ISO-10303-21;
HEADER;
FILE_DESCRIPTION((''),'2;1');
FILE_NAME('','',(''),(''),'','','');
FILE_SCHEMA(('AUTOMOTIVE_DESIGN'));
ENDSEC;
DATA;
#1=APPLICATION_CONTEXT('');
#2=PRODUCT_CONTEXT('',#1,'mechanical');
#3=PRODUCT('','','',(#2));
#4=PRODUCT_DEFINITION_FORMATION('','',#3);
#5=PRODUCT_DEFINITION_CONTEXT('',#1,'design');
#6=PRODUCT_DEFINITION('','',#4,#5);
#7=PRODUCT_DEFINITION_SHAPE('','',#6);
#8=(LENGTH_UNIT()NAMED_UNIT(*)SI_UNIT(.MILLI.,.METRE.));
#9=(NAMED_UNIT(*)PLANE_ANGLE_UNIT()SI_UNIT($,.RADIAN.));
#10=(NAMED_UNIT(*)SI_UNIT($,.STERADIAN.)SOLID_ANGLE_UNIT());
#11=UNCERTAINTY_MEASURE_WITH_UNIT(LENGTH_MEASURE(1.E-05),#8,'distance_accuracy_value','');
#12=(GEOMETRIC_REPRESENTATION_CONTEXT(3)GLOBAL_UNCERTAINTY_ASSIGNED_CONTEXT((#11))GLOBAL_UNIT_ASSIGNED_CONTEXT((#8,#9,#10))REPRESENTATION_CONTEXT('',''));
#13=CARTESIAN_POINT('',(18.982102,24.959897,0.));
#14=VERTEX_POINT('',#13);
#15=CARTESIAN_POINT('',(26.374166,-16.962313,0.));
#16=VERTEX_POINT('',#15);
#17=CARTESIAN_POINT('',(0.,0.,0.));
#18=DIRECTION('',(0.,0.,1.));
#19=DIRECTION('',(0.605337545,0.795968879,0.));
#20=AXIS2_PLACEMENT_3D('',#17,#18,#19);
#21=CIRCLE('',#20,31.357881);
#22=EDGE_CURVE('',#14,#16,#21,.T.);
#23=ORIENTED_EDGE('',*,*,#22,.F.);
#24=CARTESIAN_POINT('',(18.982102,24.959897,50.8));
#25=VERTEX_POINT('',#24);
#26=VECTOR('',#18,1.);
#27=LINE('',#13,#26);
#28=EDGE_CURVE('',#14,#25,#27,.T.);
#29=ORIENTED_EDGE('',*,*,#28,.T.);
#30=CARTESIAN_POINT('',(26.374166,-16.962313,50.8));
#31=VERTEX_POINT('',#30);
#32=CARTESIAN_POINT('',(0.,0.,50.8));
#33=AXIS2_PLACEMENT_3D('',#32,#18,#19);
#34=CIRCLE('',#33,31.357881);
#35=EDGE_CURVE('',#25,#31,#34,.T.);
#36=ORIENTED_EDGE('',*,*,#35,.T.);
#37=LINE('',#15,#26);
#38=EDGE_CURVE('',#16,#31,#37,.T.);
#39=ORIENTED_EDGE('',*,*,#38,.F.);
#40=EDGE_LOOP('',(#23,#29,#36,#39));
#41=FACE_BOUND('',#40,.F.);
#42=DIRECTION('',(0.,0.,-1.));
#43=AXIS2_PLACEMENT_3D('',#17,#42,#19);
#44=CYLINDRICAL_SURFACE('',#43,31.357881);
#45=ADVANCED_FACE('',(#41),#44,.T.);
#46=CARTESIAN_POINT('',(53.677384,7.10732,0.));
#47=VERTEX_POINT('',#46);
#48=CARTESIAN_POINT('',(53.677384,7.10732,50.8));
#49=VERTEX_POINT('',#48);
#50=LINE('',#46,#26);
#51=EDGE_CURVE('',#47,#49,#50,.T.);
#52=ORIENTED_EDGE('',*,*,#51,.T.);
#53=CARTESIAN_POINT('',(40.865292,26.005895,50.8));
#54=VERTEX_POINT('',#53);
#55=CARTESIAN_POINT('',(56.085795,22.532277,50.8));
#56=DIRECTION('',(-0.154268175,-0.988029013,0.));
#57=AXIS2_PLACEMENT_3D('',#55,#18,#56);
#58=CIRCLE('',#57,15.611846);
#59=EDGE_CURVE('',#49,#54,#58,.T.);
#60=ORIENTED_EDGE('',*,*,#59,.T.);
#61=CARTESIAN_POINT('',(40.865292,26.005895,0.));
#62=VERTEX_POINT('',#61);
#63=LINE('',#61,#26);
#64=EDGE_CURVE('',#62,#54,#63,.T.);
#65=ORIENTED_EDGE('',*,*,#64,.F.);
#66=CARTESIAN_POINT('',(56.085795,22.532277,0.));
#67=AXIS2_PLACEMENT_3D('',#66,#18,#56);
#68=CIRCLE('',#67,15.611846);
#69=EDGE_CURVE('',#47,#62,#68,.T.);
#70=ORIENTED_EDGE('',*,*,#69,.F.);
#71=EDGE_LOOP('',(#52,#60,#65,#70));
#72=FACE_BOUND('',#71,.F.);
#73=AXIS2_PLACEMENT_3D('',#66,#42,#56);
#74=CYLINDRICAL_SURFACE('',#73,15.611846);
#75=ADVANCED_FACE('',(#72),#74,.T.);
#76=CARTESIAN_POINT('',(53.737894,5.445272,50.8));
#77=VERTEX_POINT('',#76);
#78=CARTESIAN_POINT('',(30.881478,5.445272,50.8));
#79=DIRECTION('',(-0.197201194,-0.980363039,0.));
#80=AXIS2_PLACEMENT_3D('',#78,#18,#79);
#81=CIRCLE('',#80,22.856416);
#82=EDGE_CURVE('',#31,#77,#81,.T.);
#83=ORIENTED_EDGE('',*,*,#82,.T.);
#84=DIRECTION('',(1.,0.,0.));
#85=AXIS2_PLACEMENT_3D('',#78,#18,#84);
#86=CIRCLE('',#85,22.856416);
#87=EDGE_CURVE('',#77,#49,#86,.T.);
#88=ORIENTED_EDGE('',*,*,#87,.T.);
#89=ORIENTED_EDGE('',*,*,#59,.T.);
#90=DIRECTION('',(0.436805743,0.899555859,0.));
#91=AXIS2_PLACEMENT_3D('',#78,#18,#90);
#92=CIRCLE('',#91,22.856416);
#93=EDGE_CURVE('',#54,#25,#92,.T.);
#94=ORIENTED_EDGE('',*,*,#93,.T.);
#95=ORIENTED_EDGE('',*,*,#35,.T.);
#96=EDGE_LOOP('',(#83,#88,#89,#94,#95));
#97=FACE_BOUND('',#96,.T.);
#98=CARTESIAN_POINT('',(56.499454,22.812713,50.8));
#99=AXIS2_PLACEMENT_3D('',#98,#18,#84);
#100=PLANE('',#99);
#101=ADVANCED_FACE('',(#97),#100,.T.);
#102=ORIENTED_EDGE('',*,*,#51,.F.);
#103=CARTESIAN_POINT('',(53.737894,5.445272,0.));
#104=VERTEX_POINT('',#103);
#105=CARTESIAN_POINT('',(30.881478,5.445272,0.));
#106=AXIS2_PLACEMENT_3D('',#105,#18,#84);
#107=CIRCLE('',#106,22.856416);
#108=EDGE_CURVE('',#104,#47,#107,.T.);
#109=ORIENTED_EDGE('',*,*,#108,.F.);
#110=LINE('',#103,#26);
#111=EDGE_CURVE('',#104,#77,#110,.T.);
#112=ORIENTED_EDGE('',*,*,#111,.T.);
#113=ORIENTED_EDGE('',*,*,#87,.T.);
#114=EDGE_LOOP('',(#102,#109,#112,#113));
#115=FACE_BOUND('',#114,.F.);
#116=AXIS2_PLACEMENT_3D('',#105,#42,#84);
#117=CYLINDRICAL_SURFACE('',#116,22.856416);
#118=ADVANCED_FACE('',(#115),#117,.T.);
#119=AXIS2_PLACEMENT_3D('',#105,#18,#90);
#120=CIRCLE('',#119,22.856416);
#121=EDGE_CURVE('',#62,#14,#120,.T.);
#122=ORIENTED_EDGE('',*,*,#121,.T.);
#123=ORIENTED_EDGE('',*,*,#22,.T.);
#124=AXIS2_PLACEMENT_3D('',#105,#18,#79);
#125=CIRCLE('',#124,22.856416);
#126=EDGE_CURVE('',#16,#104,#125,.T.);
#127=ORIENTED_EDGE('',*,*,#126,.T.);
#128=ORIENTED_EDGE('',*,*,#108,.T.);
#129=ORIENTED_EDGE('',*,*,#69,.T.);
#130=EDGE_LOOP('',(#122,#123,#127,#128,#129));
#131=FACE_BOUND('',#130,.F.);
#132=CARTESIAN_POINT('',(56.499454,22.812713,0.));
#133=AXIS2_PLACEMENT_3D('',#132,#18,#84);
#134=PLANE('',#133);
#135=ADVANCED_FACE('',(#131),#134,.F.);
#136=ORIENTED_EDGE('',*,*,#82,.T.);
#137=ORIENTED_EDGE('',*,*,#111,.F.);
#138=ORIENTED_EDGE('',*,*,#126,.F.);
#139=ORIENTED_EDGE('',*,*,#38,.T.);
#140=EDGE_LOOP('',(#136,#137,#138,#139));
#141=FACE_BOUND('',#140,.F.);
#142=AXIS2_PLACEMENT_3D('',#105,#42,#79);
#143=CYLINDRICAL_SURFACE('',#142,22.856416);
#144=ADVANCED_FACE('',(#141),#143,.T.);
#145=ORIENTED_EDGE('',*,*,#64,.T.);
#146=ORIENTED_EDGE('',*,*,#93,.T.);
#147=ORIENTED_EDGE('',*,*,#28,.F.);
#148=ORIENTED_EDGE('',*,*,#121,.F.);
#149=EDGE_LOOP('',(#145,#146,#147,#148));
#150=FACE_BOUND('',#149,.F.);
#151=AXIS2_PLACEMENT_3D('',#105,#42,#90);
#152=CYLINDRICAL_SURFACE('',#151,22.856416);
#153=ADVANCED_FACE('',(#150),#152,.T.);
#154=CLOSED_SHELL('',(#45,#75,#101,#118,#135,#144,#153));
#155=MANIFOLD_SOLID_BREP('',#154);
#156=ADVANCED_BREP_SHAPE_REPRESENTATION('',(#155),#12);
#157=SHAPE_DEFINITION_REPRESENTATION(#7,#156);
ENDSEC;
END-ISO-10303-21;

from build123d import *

# Parameters (mm, degrees)
F1_DEPTH = 50.8


# Not quite as in the source:
# - the program builds the solid bodies; features that only make, move or delete a surface that nothing else refers to are left out


with BuildPart() as f1:
    # F0 (on Top) → F1 (new body)
    with BuildSketch(Plane.XY):
        with BuildLine():
            ThreePointArc((71.697641485, 22.5322768092), (57.8335915966, 38.0459789198), (40.8652917128, 26.0058945539))
            ThreePointArc((40.8652917128, 26.0058945539), (49.8001603414, 18.2709960085), (53.6773841191, 7.1073197012))
            ThreePointArc((53.6773841191, 7.1073197012), (66.2378886043, 10.6720599339), (71.697641485, 22.5322768092))
        make_face()
        with BuildLine():
            ThreePointArc((40.8652917128, 26.0058945539), (29.7902072309, 28.2756215729), (18.9821024809, 24.9598971069))
            ThreePointArc((18.9821024809, 24.9598971069), (28.094084627, 13.9297913535), (31.3578806392, 0))
            ThreePointArc((31.3578806392, 0), (30.0861647392, -8.8396475875), (26.3741656765, -16.9623130219))
            ThreePointArc((26.3741656765, -16.9623130219), (45.3624091415, -12.2385728556), (53.7378936923, 5.4452720199))
            ThreePointArc((53.7378936923, 5.4452720199), (53.7227612897, 6.2768464158), (53.6773841191, 7.1073197012))
            ThreePointArc((53.6773841191, 7.1073197012), (43.1635782705, 13.7717941683), (40.8652917128, 26.0058945539))
        make_face()
        with BuildLine():
            ThreePointArc((53.6773841191, 7.1073197012), (49.8001603414, 18.2709960085), (40.8652917128, 26.0058945539))
            ThreePointArc((40.8652917128, 26.0058945539), (43.1635782705, 13.7717941683), (53.6773841191, 7.1073197012))
        make_face()
        with BuildLine():
            ThreePointArc((25.2208191949, -16.6990878355), (28.9640451764, -8.7197099962), (30.2481281305, 0))
            ThreePointArc((30.2481281305, 0), (27.0098398624, 13.6168207012), (17.9883409986, 24.3180764765))
            ThreePointArc((17.9883409986, 24.3180764765), (8.3723071222, 1.4762729148), (25.2208191949, -16.6990878355))
        make_face()
        with BuildLine():
            ThreePointArc((17.9883409986, 24.3180764765), (27.0098398624, 13.6168207012), (30.2481281305, 0))
            ThreePointArc((30.2481281305, 0), (28.9640451764, -8.7197099962), (25.2208191949, -16.6990878355))
            ThreePointArc((25.2208191949, -16.6990878355), (25.7957891487, -16.8381635446), (26.3741656765, -16.9623130219))
            ThreePointArc((26.3741656765, -16.9623130219), (30.0861647392, -8.8396475875), (31.3578806392, 0))
            ThreePointArc((31.3578806392, 0), (28.094084627, 13.9297913535), (18.9821024809, 24.9598971069))
            ThreePointArc((18.9821024809, 24.9598971069), (18.4810686237, 24.6454172593), (17.9883409986, 24.3180764765))
        make_face()
        with BuildLine():
            ThreePointArc((25.2208191949, -16.6990878355), (-29.7885854516, -5.2525643445), (17.9883409986, 24.3180764765))
            ThreePointArc((17.9883409986, 24.3180764765), (18.4810686237, 24.6454172593), (18.9821024809, 24.9598971069))
            ThreePointArc((18.9821024809, 24.9598971069), (-30.881478119, -5.4452720199), (26.3741656765, -16.9623130219))
            ThreePointArc((26.3741656765, -16.9623130219), (25.7957891487, -16.8381635446), (25.2208191949, -16.6990878355))
        make_face()
        with BuildLine():
            ThreePointArc((25.2208191949, -16.6990878355), (8.3723071222, 1.4762729148), (17.9883409986, 24.3180764765))
            ThreePointArc((17.9883409986, 24.3180764765), (-29.7885854516, -5.2525643445), (25.2208191949, -16.6990878355))
        make_face()
    extrude(amount=F1_DEPTH)


solid = f1.part
